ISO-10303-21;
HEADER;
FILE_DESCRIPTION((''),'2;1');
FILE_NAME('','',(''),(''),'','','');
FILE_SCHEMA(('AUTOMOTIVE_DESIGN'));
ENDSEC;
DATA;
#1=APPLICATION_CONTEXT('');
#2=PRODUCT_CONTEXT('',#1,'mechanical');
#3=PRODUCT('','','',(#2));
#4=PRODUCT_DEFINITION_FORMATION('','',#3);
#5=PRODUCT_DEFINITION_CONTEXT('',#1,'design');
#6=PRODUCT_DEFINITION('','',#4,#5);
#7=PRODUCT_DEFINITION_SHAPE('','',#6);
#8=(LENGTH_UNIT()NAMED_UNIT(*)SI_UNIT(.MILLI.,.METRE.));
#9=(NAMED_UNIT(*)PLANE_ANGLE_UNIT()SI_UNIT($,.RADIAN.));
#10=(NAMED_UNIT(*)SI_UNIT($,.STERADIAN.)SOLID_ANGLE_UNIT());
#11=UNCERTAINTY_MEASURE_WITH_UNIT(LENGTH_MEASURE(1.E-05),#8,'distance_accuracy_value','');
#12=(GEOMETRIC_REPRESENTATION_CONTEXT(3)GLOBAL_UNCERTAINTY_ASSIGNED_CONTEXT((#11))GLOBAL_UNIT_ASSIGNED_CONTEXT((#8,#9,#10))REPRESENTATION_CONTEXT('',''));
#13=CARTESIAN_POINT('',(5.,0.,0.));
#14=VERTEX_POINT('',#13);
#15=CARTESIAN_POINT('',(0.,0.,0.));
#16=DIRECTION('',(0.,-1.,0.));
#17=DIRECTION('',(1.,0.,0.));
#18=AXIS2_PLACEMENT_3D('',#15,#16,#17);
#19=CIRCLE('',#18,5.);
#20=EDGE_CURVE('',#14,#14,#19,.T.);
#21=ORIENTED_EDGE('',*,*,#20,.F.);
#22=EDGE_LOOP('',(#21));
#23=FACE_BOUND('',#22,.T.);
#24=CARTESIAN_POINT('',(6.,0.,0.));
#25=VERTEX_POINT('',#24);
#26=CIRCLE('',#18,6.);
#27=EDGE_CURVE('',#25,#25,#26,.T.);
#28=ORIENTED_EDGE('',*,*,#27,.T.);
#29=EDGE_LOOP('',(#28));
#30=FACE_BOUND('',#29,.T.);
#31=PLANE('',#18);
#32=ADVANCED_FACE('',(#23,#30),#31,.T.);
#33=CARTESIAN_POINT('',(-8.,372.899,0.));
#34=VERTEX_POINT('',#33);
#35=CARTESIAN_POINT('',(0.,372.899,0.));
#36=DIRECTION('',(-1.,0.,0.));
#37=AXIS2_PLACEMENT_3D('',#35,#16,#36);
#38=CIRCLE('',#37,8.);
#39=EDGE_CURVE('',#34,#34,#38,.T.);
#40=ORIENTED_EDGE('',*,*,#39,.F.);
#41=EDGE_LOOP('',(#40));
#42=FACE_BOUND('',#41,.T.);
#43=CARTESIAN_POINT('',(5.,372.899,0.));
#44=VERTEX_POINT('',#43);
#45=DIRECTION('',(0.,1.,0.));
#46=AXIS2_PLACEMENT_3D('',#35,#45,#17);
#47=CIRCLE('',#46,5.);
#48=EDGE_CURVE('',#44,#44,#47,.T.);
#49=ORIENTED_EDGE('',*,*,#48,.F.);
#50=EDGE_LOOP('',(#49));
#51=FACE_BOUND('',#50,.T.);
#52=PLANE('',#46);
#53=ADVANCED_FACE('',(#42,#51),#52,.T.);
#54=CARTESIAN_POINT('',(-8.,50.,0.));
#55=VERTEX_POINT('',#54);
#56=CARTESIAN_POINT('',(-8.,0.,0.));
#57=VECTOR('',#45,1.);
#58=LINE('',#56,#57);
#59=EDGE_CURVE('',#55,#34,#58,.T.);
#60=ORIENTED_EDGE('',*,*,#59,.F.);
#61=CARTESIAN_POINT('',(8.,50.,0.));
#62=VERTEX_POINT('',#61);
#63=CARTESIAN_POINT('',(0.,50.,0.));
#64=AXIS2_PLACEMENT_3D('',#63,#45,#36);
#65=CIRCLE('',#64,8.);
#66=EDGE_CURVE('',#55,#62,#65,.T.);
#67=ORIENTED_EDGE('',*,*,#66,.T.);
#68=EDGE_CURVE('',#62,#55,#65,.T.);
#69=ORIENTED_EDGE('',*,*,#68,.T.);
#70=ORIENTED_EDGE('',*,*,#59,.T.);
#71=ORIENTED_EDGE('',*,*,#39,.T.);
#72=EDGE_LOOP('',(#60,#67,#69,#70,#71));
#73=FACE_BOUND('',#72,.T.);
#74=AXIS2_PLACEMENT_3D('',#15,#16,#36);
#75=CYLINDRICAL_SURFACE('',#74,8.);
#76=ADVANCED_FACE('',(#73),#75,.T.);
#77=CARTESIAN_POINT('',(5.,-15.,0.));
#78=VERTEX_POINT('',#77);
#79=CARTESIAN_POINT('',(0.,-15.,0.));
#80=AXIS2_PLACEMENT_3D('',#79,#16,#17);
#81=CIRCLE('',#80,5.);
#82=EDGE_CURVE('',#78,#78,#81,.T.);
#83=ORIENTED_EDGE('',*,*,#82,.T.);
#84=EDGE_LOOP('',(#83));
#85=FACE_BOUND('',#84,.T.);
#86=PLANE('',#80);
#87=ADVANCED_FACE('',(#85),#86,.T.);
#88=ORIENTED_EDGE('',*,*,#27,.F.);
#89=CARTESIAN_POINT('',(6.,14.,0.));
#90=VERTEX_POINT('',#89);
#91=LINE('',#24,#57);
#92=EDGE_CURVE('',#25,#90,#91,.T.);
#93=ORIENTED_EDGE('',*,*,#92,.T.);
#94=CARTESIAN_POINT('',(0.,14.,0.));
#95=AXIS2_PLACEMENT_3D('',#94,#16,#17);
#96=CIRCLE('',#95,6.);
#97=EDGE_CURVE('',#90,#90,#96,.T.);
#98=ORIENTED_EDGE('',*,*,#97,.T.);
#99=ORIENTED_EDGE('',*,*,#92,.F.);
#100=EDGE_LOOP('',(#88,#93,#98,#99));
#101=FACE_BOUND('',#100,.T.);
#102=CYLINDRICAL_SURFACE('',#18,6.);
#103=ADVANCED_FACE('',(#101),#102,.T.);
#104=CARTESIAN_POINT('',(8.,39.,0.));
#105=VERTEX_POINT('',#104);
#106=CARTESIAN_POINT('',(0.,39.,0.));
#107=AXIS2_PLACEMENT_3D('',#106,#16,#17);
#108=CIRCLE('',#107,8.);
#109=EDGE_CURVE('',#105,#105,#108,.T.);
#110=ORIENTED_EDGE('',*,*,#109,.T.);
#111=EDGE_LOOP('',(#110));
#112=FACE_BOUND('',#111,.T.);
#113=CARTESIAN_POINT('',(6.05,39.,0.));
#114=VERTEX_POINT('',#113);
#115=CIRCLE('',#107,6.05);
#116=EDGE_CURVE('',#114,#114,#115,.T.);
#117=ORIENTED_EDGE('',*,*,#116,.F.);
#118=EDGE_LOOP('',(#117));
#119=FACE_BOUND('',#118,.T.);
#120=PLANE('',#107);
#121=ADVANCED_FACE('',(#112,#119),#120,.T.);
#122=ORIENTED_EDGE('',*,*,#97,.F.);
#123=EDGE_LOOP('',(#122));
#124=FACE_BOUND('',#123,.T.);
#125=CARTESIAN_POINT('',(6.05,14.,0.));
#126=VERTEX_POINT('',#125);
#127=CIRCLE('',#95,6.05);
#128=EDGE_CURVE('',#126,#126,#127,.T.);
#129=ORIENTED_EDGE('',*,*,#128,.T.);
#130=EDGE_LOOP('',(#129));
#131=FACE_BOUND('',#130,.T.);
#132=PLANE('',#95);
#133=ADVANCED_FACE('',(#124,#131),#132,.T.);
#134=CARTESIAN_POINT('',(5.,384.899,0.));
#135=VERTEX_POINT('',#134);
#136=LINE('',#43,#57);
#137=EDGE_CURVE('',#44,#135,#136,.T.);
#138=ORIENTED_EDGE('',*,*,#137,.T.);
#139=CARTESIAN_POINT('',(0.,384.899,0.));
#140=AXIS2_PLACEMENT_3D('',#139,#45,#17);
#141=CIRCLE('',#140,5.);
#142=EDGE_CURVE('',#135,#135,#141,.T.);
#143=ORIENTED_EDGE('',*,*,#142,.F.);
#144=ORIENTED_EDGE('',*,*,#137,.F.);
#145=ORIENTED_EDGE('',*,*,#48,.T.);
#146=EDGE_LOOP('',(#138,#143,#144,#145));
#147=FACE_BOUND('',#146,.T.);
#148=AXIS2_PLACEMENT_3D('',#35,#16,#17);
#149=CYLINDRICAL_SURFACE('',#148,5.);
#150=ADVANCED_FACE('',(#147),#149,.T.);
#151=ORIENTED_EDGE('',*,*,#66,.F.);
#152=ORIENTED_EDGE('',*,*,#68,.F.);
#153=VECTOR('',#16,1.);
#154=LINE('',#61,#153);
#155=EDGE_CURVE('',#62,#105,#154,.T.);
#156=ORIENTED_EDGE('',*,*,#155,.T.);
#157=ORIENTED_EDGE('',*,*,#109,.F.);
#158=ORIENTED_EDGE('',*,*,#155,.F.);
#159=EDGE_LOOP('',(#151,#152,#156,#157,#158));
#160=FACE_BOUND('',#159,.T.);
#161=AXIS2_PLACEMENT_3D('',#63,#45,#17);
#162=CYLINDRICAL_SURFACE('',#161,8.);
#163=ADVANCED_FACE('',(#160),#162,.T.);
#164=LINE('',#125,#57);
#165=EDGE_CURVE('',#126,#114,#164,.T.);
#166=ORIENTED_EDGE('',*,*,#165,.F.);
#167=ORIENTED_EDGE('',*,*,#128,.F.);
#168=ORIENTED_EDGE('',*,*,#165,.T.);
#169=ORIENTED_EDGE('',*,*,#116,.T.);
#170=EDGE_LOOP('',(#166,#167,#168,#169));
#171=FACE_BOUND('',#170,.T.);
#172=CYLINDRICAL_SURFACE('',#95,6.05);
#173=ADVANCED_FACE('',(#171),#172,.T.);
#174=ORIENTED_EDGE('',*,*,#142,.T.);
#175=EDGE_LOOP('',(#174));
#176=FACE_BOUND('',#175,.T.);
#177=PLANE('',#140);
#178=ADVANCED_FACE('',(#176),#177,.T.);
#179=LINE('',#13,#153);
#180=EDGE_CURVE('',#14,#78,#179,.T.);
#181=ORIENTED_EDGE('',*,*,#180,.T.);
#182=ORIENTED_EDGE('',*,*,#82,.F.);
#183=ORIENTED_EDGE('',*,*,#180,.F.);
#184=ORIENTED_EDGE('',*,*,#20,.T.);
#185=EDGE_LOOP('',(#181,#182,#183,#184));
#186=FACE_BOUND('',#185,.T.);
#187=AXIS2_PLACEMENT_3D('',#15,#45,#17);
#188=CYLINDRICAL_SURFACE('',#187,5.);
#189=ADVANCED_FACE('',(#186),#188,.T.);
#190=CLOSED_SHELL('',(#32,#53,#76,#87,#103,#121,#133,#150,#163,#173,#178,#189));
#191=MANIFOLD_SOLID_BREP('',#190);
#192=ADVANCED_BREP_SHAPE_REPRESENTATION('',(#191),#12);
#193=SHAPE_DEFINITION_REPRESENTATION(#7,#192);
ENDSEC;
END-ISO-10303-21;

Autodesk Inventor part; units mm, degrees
ref_plane "YZ Plane" through (0, 0, 0) normal (1, 0, 0) x (0, 1, 0)
ref_plane "XZ Plane" through (0, 0, 0) normal (0, 1, 0) x (-1, 0, 0)
ref_plane "XY Plane" through (0, 0, 0) normal (0, 0, 1) x (1, 0, 0)
sketch "Sketch1" plane through (0, 0, 0) normal (0, 1, 0) x (-1, 0, 0)
  circle A0 centre (0, 0) radius 8
  dimension "d0" = 16
extrude "Extrusion1" add sketch "Sketch1" along normal blind 400
sketch "Sketch2" plane through (0, 0, 0) normal (0, -1, 0) x (1, 0, 0)
  circle A0 centre (0, 0) radius 8 projected
extrude "Extrusion2" cut sketch "Sketch2" against normal blind 50
sketch "Sketch3" plane through (0, 50, 0) normal (0, -1, 0) x (1, 0, 0)
  circle A0 centre (0, 0) radius 8 projected
extrude "Extrusion3" add sketch "Sketch3" along normal blind 50
sketch "Sketch4" plane through (0, 0, 0) normal (0, -1, 0) x (1, 0, 0)
  circle A0 centre (0, 0) radius 8 projected
  circle A1 centre (0, 0) radius 6
  dimension "d7" = 12
extrude "Extrusion4" cut sketch "Sketch4" against normal blind 14
thread "Thread1" size "M12x1" class "6g" standard "ANSI Metric M Profile" full length
sketch "Sketch6" plane through (0, 14, 0) normal (0, -1, 0) x (1, 0, 0)
  circle A0 centre (0, 0) radius 8 projected
  circle A1 centre (0, 0) radius 6.05
  dimension "d13" = 12.1
extrude "Extrusion5" cut sketch "Sketch6" against normal blind 25
sketch "Sketch7" plane through (0, 0, 0) normal (0, -1, 0) x (1, 0, 0)
  circle A0 centre (0, 0) radius 6 projected
  circle A1 centre (0, 0) radius 5
  dimension "d16" = 10
extrude "Extrusion6" add sketch "Sketch7" along normal blind 15 contours A1
sketch "Sketch8" plane through (0, 400, 0) normal (0, 1, 0) x (1, 0, 0)
  circle A0 centre (0, 0) radius 8 projected
extrude "Extrusion7" cut sketch "Sketch8" against normal blind 27.101
sketch "Sketch9" plane through (0, 372.899, 0) normal (0, 1, 0) x (1, 0, 0)
  circle A0 centre (0, 0) radius 8 projected
  circle A1 centre (0, 0) radius 5
  dimension "d21" = 10
extrude "Extrusion8" add sketch "Sketch9" along normal blind 12 contours A1
properties part number "1605_400mm"
